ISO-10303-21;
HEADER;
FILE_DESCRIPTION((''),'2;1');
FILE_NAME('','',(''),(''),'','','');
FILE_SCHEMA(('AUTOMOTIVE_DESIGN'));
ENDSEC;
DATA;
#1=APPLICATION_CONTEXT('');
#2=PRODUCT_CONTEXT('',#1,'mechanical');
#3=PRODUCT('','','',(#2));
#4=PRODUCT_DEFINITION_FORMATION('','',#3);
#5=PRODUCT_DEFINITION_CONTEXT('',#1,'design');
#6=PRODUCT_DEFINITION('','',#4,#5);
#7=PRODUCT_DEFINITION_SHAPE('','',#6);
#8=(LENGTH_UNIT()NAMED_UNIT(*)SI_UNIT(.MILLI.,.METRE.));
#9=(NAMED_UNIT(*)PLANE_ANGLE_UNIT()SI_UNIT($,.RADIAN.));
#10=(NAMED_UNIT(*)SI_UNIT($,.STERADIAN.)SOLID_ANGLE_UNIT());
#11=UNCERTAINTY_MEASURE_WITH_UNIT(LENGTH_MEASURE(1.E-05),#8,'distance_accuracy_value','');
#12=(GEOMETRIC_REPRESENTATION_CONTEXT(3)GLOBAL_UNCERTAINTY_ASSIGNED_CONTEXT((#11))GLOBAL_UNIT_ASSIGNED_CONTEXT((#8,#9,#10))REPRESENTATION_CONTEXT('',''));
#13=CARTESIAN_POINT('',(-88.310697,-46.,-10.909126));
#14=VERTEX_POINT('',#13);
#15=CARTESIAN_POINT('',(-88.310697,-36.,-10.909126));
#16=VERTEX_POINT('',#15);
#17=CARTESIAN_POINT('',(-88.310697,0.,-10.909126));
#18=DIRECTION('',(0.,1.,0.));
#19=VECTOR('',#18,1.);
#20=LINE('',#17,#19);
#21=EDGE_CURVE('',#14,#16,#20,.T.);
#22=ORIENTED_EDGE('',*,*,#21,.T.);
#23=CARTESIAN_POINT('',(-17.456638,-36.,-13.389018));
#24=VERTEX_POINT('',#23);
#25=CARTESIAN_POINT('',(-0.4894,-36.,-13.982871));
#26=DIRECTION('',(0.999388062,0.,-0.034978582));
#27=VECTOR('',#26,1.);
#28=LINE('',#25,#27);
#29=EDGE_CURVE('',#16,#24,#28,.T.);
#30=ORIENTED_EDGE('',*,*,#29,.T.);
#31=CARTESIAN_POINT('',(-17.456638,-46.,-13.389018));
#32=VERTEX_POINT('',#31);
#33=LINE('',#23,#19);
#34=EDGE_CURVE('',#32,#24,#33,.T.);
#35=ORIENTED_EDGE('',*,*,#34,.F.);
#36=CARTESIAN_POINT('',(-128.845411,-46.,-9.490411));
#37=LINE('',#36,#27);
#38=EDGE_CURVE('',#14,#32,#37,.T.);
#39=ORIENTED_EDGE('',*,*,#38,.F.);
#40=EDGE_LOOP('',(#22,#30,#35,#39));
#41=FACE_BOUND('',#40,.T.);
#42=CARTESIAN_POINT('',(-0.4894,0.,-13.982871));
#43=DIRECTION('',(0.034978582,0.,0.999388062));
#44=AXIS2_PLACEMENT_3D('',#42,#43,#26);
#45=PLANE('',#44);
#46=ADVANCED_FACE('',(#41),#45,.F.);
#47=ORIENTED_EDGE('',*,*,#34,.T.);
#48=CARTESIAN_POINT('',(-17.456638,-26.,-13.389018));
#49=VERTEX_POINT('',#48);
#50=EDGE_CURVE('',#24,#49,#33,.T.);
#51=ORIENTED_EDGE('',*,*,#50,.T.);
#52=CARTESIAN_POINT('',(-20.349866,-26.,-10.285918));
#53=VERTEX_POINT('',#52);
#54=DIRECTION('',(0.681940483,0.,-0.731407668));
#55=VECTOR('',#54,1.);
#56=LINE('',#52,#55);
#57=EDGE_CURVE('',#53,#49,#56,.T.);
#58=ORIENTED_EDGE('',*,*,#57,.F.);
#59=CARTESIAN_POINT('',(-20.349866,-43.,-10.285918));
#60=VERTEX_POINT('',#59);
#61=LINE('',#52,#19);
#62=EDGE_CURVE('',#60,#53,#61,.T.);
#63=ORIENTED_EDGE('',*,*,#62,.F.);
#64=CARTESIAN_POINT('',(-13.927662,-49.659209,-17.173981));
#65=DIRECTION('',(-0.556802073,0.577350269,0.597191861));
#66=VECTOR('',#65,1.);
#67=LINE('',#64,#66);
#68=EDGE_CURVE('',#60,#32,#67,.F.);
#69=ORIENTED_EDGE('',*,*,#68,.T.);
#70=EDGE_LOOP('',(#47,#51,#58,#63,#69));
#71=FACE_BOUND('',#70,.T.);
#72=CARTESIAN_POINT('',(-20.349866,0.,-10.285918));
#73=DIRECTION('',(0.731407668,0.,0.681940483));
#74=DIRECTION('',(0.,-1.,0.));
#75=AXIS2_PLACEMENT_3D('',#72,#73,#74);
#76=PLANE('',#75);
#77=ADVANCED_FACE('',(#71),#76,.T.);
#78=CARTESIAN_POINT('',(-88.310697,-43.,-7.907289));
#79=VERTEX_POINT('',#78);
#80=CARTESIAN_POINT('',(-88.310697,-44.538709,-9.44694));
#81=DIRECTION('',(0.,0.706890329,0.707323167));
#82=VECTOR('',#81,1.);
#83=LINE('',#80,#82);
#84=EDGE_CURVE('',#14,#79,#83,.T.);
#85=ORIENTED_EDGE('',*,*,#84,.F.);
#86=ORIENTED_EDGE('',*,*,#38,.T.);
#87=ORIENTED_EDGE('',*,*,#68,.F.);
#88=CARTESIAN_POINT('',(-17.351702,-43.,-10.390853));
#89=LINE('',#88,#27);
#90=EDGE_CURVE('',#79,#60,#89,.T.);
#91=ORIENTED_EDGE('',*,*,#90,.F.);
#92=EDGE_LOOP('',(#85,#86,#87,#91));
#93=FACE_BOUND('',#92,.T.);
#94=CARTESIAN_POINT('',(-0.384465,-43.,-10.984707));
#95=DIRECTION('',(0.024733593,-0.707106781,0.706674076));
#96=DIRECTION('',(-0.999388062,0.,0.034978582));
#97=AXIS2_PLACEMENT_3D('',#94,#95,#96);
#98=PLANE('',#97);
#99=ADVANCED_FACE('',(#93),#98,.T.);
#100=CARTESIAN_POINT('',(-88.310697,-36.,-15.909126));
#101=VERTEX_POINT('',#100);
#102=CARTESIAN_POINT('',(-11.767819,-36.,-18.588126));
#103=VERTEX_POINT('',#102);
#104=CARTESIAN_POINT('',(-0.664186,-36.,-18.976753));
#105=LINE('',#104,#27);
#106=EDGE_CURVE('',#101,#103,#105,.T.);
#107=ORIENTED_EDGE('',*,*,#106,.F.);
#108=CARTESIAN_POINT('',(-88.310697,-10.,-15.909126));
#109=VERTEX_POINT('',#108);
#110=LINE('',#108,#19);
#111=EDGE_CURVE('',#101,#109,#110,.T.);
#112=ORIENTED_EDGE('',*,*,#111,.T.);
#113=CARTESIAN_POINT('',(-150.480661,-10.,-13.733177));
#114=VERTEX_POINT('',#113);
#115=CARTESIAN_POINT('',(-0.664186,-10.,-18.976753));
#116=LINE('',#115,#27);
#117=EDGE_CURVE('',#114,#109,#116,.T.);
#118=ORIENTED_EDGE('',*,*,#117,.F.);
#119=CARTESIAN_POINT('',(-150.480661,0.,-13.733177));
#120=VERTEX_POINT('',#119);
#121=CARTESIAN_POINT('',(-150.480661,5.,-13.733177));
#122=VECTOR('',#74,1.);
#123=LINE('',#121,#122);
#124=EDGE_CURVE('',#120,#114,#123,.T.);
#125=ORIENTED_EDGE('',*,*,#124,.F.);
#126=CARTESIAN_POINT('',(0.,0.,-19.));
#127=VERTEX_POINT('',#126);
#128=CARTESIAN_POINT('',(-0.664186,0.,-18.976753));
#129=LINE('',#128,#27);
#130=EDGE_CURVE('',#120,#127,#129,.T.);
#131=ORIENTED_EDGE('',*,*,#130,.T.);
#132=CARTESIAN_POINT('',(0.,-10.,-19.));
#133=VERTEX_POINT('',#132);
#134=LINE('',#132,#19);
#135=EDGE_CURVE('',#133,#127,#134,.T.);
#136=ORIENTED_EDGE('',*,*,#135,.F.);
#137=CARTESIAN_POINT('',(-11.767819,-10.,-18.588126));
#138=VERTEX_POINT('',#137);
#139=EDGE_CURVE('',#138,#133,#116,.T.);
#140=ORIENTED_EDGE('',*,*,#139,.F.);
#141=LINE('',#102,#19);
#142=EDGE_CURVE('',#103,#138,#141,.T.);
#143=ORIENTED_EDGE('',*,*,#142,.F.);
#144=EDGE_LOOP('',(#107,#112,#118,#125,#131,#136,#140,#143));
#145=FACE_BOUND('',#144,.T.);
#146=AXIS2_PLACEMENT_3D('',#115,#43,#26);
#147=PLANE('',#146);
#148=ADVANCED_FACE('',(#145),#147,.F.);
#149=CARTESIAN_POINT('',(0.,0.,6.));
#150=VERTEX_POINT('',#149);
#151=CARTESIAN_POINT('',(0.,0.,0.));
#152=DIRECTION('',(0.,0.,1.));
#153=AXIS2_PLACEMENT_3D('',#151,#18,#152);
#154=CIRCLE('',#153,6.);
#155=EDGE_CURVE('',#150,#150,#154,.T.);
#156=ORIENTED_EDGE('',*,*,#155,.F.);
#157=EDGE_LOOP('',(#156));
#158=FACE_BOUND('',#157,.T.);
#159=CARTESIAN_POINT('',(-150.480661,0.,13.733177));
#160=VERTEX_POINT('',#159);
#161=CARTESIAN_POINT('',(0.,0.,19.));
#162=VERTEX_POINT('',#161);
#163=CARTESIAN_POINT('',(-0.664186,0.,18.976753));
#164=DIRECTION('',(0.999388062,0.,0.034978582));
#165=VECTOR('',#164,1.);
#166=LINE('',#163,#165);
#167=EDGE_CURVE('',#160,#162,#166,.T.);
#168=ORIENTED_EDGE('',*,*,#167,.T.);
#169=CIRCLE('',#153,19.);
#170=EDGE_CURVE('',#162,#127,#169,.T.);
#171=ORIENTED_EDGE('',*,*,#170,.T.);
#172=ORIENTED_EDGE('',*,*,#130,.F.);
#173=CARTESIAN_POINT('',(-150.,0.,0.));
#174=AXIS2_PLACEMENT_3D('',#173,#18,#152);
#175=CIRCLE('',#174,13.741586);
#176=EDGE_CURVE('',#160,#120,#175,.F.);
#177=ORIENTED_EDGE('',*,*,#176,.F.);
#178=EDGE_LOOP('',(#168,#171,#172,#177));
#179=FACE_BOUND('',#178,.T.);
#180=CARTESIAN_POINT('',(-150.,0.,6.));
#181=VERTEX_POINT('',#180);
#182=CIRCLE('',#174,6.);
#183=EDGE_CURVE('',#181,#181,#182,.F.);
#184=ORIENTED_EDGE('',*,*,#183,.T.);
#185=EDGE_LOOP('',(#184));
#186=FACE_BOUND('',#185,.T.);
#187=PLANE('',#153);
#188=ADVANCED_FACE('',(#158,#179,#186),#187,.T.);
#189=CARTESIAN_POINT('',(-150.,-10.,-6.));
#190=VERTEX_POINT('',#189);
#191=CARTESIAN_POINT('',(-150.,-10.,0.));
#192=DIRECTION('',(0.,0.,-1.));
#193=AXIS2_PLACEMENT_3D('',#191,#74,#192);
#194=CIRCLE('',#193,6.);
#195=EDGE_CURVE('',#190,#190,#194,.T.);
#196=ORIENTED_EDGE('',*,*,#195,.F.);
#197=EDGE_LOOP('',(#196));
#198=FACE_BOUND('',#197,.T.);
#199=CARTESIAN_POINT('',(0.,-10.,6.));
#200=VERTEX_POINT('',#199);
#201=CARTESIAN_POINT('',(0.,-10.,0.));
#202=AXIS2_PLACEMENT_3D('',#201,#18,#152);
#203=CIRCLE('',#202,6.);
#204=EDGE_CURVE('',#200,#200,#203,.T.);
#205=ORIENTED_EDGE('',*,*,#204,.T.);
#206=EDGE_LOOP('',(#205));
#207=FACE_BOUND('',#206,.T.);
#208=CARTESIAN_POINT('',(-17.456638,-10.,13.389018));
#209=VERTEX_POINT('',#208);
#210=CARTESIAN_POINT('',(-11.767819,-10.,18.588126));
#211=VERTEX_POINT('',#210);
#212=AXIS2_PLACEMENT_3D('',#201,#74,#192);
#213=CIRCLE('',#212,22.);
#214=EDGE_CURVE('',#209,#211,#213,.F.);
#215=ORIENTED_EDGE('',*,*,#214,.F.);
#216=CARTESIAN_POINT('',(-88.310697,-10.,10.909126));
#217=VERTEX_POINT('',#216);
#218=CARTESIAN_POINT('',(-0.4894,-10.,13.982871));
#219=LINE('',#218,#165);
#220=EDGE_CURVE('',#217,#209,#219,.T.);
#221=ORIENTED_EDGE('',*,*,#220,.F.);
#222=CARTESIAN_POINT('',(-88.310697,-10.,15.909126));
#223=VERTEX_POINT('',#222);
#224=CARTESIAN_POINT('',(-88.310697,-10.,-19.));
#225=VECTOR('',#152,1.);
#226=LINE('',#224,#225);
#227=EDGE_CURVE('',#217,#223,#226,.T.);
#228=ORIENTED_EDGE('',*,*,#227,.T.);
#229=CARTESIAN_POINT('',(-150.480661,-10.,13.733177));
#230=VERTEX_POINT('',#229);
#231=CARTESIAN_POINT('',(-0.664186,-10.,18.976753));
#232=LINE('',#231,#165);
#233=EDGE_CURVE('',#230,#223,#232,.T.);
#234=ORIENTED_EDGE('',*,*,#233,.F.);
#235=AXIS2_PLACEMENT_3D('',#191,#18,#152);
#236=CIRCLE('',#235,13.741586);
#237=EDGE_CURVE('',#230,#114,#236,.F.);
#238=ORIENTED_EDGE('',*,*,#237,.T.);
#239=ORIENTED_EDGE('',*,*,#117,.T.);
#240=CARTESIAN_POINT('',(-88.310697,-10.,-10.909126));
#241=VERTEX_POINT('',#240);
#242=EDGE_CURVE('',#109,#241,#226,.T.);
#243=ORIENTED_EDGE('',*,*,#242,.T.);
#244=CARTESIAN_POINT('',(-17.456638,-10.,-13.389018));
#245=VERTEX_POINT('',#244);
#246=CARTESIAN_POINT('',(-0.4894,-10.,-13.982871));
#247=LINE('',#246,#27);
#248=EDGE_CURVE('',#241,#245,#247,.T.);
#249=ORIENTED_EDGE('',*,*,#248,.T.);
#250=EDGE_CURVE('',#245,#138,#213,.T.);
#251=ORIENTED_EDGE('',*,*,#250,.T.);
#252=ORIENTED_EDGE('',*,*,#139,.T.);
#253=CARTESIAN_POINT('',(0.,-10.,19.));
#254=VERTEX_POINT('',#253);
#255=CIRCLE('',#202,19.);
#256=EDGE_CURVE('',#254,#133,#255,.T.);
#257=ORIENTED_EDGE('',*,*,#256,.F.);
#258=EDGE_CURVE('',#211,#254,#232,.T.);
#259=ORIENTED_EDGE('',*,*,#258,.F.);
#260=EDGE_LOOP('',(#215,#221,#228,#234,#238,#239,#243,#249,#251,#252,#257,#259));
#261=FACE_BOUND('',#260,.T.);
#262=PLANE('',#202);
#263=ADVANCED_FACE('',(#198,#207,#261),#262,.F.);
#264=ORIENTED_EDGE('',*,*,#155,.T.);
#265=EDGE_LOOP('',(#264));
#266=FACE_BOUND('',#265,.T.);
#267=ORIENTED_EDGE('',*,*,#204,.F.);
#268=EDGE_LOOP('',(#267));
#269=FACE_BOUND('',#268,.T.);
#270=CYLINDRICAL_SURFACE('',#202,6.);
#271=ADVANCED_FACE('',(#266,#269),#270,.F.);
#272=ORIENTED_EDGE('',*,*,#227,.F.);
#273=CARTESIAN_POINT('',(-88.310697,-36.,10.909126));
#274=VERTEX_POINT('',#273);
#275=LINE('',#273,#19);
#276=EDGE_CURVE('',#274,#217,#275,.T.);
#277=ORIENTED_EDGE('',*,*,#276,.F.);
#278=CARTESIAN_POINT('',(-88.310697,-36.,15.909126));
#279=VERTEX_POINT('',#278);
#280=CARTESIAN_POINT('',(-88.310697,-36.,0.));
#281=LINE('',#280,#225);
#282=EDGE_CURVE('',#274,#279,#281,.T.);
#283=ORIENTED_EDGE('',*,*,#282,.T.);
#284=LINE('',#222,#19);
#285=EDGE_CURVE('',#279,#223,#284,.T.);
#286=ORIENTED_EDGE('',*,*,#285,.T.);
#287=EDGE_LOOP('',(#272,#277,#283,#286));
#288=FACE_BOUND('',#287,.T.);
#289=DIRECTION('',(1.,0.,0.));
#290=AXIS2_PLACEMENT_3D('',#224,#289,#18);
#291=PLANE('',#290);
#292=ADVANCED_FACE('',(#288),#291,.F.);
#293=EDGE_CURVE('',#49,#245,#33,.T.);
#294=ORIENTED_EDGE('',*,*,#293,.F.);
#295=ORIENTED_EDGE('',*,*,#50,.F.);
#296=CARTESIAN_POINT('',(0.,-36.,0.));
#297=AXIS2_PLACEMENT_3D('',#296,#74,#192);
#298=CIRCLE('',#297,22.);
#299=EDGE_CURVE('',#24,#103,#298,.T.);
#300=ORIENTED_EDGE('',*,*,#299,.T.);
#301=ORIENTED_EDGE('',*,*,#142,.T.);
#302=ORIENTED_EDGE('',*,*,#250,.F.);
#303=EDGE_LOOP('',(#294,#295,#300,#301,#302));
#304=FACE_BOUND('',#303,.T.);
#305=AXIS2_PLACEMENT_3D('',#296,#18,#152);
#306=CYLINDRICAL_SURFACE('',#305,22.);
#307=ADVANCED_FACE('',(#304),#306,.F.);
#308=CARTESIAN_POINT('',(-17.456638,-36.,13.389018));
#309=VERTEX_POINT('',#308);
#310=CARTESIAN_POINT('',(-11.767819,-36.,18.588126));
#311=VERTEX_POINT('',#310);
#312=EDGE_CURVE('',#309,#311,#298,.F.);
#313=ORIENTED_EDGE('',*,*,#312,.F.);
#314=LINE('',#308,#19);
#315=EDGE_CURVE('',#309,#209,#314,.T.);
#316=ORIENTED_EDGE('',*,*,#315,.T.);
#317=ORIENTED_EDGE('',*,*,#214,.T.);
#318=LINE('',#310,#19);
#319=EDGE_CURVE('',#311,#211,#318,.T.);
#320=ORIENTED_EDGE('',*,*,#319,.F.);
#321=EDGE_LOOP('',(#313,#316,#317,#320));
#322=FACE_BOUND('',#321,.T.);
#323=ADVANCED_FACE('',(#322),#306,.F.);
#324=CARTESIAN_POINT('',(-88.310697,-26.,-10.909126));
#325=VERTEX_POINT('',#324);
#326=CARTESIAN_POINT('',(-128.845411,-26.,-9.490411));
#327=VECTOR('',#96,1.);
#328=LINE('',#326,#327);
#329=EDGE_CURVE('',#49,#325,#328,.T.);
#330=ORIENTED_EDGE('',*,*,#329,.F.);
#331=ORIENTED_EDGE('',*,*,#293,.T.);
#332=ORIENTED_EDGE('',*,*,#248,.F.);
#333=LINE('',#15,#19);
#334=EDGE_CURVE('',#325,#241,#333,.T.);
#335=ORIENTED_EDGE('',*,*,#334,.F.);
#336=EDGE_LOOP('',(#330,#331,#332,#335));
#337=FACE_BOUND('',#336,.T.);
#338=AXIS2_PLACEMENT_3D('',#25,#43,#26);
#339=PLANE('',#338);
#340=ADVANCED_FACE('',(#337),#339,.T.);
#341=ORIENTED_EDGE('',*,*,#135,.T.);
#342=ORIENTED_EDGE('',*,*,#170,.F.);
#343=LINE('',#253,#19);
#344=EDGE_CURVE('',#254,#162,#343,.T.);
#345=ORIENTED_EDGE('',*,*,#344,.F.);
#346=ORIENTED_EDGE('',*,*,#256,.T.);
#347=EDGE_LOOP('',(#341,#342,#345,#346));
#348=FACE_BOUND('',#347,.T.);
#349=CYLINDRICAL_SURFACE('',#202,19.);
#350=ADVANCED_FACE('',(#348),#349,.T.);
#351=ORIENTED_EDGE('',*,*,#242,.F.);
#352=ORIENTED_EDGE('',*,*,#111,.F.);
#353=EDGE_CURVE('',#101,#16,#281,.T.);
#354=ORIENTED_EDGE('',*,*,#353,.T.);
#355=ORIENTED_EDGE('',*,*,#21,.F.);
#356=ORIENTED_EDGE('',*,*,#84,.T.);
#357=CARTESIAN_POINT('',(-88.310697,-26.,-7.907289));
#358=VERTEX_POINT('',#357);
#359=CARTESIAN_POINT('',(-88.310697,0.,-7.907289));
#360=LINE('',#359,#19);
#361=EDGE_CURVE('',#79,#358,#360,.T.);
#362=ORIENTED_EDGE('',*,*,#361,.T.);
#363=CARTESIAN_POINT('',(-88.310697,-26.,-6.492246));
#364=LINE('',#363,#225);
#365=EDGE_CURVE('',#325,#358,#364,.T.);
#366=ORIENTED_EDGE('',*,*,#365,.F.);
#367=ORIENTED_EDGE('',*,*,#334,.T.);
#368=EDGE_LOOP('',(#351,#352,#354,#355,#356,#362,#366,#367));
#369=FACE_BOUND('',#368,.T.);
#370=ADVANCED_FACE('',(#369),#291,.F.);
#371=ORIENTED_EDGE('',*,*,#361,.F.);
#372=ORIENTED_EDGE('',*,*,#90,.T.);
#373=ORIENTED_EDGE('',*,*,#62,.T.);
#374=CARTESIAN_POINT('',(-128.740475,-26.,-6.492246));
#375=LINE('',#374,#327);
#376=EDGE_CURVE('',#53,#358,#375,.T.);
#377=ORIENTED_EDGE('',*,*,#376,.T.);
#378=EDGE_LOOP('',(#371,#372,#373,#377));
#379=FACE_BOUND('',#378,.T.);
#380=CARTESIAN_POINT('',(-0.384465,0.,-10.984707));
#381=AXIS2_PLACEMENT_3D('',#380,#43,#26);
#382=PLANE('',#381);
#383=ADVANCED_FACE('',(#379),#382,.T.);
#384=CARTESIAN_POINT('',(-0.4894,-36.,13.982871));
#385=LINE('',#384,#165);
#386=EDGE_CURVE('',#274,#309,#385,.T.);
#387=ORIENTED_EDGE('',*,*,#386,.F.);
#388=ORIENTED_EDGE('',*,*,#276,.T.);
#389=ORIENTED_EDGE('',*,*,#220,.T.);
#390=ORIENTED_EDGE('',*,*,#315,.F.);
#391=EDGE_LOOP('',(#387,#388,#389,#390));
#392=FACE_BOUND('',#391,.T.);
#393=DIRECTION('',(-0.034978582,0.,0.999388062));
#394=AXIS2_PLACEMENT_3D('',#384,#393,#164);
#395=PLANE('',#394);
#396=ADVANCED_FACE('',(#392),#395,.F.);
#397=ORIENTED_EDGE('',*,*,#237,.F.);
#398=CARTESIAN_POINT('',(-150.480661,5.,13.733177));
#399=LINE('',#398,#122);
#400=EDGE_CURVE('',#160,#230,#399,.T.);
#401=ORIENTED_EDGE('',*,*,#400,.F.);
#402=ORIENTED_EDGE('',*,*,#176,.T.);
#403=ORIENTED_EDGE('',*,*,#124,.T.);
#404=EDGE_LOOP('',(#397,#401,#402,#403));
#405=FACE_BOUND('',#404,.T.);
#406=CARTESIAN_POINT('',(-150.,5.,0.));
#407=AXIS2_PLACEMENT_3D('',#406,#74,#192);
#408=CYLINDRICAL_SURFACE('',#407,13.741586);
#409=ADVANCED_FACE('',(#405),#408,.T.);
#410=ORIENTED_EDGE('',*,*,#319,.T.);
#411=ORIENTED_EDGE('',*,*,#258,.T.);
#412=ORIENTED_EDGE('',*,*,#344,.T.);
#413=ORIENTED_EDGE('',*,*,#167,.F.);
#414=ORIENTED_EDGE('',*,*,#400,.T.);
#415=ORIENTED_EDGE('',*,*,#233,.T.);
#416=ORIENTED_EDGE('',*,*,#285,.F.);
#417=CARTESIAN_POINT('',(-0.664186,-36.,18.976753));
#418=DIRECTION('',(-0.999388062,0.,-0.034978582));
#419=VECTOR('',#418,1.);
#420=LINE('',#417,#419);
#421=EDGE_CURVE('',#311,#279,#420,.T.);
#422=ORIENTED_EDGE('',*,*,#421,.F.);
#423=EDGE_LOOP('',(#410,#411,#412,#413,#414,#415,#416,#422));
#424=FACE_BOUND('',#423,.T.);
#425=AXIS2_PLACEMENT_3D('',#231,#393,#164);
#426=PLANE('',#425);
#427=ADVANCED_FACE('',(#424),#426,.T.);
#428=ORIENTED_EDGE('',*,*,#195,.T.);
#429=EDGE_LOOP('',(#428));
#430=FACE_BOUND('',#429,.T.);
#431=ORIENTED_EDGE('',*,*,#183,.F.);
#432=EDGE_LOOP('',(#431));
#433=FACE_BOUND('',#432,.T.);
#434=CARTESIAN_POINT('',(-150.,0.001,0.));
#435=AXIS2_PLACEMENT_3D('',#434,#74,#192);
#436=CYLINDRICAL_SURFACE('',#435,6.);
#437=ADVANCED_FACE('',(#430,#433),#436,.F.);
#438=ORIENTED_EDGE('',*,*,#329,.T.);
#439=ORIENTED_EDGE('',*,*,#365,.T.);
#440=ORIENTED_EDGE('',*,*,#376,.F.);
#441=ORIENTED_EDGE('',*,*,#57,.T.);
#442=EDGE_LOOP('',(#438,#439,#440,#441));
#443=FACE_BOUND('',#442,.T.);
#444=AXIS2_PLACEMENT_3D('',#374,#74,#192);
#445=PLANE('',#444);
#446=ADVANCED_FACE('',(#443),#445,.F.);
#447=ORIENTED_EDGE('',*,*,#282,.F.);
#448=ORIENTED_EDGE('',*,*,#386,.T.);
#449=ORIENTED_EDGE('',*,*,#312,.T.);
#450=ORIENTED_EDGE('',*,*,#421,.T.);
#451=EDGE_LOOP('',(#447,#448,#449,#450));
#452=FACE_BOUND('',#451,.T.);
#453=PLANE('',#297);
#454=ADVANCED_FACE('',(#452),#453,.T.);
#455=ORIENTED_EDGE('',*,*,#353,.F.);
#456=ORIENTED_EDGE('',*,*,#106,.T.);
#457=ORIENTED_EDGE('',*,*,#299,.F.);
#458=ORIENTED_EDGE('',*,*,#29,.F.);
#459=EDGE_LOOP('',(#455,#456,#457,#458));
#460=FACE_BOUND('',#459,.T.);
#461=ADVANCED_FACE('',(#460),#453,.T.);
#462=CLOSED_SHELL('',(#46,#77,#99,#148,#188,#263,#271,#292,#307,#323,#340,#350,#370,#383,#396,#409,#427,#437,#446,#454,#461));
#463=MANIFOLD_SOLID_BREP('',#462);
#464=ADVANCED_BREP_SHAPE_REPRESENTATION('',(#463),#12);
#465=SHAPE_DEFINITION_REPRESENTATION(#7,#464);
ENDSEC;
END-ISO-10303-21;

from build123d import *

# Parameters (mm, degrees)
SKETCH1_R               = 12
SKETCH1_R_2             = 6
BOSS_EXTRUDE1_DEPTH     = 10
SKETCH2_R               = 6
SKETCH2_R_2             = 12
BOSS_EXTRUDE3_DEPTH     = 10
BOSS_EXTRUDE4_DEPTH     = 26
CUT_EXTRUDE3_START      = -41
CUT_EXTRUDE3_DEPTH      = 41
CUT_EXTRUDE4_REACH      = 168.878
SKETCH7_R               = 6
SKETCH8_R               = 22
CUT_EXTRUDE5_DEPTH      = 26
BOSS_EXTRUDE5_DEPTH     = 3
CHAMFER1_SIZE           = 3
CUT_EXTRUDE7_DEPTH      = 172.13826848
CUT_EXTRUDE7_DEPTH_BACK = 172.13826848
SKETCH12_W              = 45
SKETCH12_H              = 36


with BuildPart() as part:
    # Sketch1 → Boss-Extrude1 (new body)
    with BuildSketch(Plane(origin=(0, 0, 0), x_dir=(1, 0, 0), z_dir=(0, 1, 0))):
        with Locations(Location((0, 0, 0), (0, 0, 270))):
            Circle(SKETCH1_R)
        with Locations(Location((0, 0, 0), (0, 0, 270))):
            Circle(SKETCH1_R_2, mode=Mode.SUBTRACT)
    extrude(amount=-BOSS_EXTRUDE1_DEPTH)

    # Sketch2 → Boss-Extrude3 (add)
    with BuildSketch(Plane(origin=(0, 0, 0), x_dir=(1, 0, 0), z_dir=(0, 1, 0))):
        with BuildLine():
            Line((-1.328372743, 18.953506954), (-200, 12))
            ThreePointArc((-200, 12), (-212, 0), (-200, -12))
            Line((-200, -12), (-1.328372743, -18.953506954))
            Line((-1.328372743, -18.953506954), (0, -19))
            ThreePointArc((0, -19), (19, 0), (0, 19))
            Line((0, 19), (-1.328372743, 18.953506954))
        make_face()
        with Locations(Location((-200, 0, 0), (0, 0, 270))):
            Circle(SKETCH2_R, mode=Mode.SUBTRACT)
        Circle(SKETCH2_R_2, mode=Mode.SUBTRACT)
    extrude(amount=-BOSS_EXTRUDE3_DEPTH)

    # Sketch3 → Boss-Extrude4 (add)
    with BuildSketch(Plane.XZ.offset(10)):
        with BuildLine():
            Line((-191.415216863, -12.30046741), (-11.76781879, -18.588126342))
            ThreePointArc((-11.76781879, -18.588126342), (-14.841660941, -16.239615159), (-17.45663787, -13.389017675))
            Line((-17.45663787, -13.389017675), (-186.984061419, -7.45555785))
            ThreePointArc((-186.984061419, -7.45555785), (-188.93130171, -10.123434109), (-191.415216863, -12.30046741))
        make_face()
        with BuildLine():
            Line((-186.984061419, 7.45555785), (-17.45663787, 13.389017675))
            ThreePointArc((-17.45663787, 13.389017675), (-14.841660941, 16.239615159), (-11.76781879, 18.588126342))
            Line((-11.76781879, 18.588126342), (-191.415216863, 12.30046741))
            ThreePointArc((-191.415216863, 12.30046741), (-188.93130171, 10.123434109), (-186.984061419, 7.45555785))
        make_face()
    extrude(amount=BOSS_EXTRUDE4_DEPTH)

    # Sketch6 → Cut-Extrude3 (cut)
    with BuildSketch(Plane.XZ.offset(36).offset(CUT_EXTRUDE3_START)):
        with BuildLine():
            Line((-200, 12), (-191.415216863, 12.30046741))
            Line((-191.415216863, 12.30046741), (-150.48066119, 13.733176858))
            ThreePointArc((-150.48066119, 13.733176858), (-163.741585855, 0), (-150.48066119, -13.733176858))
            Line((-150.48066119, -13.733176858), (-191.415216863, -12.30046741))
            Line((-191.415216863, -12.30046741), (-200, -12))
            ThreePointArc((-200, -12), (-212, 0), (-200, 12))
        make_face()
    extrude(amount=CUT_EXTRUDE3_DEPTH, mode=Mode.SUBTRACT)

    # Sketch7 → Cut-Extrude4 (cut, up to next)
    with BuildSketch(Plane.XZ.offset(10), mode=Mode.PRIVATE) as cut_extrude4_sk1:
        with Locations(Location((-150, 0, 0), (0, 0, 270))):
            Circle(SKETCH7_R)
    cut_extrude4_tool1 = extrude(cut_extrude4_sk1.sketch, amount=-CUT_EXTRUDE4_REACH, mode=Mode.PRIVATE) & part.part
    add(cut_extrude4_tool1.solids().sort_by_distance((-150, -10, 0))[0], mode=Mode.SUBTRACT)

    # Sketch8 → Cut-Extrude5 (cut)
    with BuildSketch(Plane(origin=(0, -36, 0), x_dir=(-1, 0, 0), z_dir=(0, -1, 0))):
        with Locations((150, 0)):
            Circle(SKETCH8_R)
    extrude(amount=-CUT_EXTRUDE5_DEPTH, mode=Mode.SUBTRACT)

    # Sketch10 → Boss-Extrude5 (add)
    with BuildSketch(Plane(origin=(-0.489400484, 0, -13.982870983), x_dir=(0.999388062160532, 0, -0.03497858217562234), z_dir=(0.03497858217562234, 0, 0.9993880621605321))):
        Polygon((-128.434604534, -26), (-16.977626637, -26), (-16.977626637, -36), (-16.977626637, -46), (-128.434604534, -46), align=None)
    extrude(amount=BOSS_EXTRUDE5_DEPTH)

    # Chamfer1
    chamfer1_edges = [part.edges().sort_by_distance(p)[0] for p in [
        (-17.351702123, -36, -10.390853488),
        (-73.0460887, -46, -8.441549958),
        (-128.740475277, -36, -6.492246428),
    ]]
    chamfer(chamfer1_edges, length=CHAMFER1_SIZE - 0.0001)  # a hair under: the kernel refuses the full size

    # Sketch12 → Cut-Extrude7 (cut, two sides: drawn at the far end of the back side and taken through both)
    with BuildSketch(Plane.XY.offset(-CUT_EXTRUDE7_DEPTH_BACK)):
        with Locations((-110.810696752, -28)):
            Rectangle(SKETCH12_W, SKETCH12_H)
    extrude(amount=CUT_EXTRUDE7_DEPTH + CUT_EXTRUDE7_DEPTH_BACK, mode=Mode.SUBTRACT)


solid = part.part
